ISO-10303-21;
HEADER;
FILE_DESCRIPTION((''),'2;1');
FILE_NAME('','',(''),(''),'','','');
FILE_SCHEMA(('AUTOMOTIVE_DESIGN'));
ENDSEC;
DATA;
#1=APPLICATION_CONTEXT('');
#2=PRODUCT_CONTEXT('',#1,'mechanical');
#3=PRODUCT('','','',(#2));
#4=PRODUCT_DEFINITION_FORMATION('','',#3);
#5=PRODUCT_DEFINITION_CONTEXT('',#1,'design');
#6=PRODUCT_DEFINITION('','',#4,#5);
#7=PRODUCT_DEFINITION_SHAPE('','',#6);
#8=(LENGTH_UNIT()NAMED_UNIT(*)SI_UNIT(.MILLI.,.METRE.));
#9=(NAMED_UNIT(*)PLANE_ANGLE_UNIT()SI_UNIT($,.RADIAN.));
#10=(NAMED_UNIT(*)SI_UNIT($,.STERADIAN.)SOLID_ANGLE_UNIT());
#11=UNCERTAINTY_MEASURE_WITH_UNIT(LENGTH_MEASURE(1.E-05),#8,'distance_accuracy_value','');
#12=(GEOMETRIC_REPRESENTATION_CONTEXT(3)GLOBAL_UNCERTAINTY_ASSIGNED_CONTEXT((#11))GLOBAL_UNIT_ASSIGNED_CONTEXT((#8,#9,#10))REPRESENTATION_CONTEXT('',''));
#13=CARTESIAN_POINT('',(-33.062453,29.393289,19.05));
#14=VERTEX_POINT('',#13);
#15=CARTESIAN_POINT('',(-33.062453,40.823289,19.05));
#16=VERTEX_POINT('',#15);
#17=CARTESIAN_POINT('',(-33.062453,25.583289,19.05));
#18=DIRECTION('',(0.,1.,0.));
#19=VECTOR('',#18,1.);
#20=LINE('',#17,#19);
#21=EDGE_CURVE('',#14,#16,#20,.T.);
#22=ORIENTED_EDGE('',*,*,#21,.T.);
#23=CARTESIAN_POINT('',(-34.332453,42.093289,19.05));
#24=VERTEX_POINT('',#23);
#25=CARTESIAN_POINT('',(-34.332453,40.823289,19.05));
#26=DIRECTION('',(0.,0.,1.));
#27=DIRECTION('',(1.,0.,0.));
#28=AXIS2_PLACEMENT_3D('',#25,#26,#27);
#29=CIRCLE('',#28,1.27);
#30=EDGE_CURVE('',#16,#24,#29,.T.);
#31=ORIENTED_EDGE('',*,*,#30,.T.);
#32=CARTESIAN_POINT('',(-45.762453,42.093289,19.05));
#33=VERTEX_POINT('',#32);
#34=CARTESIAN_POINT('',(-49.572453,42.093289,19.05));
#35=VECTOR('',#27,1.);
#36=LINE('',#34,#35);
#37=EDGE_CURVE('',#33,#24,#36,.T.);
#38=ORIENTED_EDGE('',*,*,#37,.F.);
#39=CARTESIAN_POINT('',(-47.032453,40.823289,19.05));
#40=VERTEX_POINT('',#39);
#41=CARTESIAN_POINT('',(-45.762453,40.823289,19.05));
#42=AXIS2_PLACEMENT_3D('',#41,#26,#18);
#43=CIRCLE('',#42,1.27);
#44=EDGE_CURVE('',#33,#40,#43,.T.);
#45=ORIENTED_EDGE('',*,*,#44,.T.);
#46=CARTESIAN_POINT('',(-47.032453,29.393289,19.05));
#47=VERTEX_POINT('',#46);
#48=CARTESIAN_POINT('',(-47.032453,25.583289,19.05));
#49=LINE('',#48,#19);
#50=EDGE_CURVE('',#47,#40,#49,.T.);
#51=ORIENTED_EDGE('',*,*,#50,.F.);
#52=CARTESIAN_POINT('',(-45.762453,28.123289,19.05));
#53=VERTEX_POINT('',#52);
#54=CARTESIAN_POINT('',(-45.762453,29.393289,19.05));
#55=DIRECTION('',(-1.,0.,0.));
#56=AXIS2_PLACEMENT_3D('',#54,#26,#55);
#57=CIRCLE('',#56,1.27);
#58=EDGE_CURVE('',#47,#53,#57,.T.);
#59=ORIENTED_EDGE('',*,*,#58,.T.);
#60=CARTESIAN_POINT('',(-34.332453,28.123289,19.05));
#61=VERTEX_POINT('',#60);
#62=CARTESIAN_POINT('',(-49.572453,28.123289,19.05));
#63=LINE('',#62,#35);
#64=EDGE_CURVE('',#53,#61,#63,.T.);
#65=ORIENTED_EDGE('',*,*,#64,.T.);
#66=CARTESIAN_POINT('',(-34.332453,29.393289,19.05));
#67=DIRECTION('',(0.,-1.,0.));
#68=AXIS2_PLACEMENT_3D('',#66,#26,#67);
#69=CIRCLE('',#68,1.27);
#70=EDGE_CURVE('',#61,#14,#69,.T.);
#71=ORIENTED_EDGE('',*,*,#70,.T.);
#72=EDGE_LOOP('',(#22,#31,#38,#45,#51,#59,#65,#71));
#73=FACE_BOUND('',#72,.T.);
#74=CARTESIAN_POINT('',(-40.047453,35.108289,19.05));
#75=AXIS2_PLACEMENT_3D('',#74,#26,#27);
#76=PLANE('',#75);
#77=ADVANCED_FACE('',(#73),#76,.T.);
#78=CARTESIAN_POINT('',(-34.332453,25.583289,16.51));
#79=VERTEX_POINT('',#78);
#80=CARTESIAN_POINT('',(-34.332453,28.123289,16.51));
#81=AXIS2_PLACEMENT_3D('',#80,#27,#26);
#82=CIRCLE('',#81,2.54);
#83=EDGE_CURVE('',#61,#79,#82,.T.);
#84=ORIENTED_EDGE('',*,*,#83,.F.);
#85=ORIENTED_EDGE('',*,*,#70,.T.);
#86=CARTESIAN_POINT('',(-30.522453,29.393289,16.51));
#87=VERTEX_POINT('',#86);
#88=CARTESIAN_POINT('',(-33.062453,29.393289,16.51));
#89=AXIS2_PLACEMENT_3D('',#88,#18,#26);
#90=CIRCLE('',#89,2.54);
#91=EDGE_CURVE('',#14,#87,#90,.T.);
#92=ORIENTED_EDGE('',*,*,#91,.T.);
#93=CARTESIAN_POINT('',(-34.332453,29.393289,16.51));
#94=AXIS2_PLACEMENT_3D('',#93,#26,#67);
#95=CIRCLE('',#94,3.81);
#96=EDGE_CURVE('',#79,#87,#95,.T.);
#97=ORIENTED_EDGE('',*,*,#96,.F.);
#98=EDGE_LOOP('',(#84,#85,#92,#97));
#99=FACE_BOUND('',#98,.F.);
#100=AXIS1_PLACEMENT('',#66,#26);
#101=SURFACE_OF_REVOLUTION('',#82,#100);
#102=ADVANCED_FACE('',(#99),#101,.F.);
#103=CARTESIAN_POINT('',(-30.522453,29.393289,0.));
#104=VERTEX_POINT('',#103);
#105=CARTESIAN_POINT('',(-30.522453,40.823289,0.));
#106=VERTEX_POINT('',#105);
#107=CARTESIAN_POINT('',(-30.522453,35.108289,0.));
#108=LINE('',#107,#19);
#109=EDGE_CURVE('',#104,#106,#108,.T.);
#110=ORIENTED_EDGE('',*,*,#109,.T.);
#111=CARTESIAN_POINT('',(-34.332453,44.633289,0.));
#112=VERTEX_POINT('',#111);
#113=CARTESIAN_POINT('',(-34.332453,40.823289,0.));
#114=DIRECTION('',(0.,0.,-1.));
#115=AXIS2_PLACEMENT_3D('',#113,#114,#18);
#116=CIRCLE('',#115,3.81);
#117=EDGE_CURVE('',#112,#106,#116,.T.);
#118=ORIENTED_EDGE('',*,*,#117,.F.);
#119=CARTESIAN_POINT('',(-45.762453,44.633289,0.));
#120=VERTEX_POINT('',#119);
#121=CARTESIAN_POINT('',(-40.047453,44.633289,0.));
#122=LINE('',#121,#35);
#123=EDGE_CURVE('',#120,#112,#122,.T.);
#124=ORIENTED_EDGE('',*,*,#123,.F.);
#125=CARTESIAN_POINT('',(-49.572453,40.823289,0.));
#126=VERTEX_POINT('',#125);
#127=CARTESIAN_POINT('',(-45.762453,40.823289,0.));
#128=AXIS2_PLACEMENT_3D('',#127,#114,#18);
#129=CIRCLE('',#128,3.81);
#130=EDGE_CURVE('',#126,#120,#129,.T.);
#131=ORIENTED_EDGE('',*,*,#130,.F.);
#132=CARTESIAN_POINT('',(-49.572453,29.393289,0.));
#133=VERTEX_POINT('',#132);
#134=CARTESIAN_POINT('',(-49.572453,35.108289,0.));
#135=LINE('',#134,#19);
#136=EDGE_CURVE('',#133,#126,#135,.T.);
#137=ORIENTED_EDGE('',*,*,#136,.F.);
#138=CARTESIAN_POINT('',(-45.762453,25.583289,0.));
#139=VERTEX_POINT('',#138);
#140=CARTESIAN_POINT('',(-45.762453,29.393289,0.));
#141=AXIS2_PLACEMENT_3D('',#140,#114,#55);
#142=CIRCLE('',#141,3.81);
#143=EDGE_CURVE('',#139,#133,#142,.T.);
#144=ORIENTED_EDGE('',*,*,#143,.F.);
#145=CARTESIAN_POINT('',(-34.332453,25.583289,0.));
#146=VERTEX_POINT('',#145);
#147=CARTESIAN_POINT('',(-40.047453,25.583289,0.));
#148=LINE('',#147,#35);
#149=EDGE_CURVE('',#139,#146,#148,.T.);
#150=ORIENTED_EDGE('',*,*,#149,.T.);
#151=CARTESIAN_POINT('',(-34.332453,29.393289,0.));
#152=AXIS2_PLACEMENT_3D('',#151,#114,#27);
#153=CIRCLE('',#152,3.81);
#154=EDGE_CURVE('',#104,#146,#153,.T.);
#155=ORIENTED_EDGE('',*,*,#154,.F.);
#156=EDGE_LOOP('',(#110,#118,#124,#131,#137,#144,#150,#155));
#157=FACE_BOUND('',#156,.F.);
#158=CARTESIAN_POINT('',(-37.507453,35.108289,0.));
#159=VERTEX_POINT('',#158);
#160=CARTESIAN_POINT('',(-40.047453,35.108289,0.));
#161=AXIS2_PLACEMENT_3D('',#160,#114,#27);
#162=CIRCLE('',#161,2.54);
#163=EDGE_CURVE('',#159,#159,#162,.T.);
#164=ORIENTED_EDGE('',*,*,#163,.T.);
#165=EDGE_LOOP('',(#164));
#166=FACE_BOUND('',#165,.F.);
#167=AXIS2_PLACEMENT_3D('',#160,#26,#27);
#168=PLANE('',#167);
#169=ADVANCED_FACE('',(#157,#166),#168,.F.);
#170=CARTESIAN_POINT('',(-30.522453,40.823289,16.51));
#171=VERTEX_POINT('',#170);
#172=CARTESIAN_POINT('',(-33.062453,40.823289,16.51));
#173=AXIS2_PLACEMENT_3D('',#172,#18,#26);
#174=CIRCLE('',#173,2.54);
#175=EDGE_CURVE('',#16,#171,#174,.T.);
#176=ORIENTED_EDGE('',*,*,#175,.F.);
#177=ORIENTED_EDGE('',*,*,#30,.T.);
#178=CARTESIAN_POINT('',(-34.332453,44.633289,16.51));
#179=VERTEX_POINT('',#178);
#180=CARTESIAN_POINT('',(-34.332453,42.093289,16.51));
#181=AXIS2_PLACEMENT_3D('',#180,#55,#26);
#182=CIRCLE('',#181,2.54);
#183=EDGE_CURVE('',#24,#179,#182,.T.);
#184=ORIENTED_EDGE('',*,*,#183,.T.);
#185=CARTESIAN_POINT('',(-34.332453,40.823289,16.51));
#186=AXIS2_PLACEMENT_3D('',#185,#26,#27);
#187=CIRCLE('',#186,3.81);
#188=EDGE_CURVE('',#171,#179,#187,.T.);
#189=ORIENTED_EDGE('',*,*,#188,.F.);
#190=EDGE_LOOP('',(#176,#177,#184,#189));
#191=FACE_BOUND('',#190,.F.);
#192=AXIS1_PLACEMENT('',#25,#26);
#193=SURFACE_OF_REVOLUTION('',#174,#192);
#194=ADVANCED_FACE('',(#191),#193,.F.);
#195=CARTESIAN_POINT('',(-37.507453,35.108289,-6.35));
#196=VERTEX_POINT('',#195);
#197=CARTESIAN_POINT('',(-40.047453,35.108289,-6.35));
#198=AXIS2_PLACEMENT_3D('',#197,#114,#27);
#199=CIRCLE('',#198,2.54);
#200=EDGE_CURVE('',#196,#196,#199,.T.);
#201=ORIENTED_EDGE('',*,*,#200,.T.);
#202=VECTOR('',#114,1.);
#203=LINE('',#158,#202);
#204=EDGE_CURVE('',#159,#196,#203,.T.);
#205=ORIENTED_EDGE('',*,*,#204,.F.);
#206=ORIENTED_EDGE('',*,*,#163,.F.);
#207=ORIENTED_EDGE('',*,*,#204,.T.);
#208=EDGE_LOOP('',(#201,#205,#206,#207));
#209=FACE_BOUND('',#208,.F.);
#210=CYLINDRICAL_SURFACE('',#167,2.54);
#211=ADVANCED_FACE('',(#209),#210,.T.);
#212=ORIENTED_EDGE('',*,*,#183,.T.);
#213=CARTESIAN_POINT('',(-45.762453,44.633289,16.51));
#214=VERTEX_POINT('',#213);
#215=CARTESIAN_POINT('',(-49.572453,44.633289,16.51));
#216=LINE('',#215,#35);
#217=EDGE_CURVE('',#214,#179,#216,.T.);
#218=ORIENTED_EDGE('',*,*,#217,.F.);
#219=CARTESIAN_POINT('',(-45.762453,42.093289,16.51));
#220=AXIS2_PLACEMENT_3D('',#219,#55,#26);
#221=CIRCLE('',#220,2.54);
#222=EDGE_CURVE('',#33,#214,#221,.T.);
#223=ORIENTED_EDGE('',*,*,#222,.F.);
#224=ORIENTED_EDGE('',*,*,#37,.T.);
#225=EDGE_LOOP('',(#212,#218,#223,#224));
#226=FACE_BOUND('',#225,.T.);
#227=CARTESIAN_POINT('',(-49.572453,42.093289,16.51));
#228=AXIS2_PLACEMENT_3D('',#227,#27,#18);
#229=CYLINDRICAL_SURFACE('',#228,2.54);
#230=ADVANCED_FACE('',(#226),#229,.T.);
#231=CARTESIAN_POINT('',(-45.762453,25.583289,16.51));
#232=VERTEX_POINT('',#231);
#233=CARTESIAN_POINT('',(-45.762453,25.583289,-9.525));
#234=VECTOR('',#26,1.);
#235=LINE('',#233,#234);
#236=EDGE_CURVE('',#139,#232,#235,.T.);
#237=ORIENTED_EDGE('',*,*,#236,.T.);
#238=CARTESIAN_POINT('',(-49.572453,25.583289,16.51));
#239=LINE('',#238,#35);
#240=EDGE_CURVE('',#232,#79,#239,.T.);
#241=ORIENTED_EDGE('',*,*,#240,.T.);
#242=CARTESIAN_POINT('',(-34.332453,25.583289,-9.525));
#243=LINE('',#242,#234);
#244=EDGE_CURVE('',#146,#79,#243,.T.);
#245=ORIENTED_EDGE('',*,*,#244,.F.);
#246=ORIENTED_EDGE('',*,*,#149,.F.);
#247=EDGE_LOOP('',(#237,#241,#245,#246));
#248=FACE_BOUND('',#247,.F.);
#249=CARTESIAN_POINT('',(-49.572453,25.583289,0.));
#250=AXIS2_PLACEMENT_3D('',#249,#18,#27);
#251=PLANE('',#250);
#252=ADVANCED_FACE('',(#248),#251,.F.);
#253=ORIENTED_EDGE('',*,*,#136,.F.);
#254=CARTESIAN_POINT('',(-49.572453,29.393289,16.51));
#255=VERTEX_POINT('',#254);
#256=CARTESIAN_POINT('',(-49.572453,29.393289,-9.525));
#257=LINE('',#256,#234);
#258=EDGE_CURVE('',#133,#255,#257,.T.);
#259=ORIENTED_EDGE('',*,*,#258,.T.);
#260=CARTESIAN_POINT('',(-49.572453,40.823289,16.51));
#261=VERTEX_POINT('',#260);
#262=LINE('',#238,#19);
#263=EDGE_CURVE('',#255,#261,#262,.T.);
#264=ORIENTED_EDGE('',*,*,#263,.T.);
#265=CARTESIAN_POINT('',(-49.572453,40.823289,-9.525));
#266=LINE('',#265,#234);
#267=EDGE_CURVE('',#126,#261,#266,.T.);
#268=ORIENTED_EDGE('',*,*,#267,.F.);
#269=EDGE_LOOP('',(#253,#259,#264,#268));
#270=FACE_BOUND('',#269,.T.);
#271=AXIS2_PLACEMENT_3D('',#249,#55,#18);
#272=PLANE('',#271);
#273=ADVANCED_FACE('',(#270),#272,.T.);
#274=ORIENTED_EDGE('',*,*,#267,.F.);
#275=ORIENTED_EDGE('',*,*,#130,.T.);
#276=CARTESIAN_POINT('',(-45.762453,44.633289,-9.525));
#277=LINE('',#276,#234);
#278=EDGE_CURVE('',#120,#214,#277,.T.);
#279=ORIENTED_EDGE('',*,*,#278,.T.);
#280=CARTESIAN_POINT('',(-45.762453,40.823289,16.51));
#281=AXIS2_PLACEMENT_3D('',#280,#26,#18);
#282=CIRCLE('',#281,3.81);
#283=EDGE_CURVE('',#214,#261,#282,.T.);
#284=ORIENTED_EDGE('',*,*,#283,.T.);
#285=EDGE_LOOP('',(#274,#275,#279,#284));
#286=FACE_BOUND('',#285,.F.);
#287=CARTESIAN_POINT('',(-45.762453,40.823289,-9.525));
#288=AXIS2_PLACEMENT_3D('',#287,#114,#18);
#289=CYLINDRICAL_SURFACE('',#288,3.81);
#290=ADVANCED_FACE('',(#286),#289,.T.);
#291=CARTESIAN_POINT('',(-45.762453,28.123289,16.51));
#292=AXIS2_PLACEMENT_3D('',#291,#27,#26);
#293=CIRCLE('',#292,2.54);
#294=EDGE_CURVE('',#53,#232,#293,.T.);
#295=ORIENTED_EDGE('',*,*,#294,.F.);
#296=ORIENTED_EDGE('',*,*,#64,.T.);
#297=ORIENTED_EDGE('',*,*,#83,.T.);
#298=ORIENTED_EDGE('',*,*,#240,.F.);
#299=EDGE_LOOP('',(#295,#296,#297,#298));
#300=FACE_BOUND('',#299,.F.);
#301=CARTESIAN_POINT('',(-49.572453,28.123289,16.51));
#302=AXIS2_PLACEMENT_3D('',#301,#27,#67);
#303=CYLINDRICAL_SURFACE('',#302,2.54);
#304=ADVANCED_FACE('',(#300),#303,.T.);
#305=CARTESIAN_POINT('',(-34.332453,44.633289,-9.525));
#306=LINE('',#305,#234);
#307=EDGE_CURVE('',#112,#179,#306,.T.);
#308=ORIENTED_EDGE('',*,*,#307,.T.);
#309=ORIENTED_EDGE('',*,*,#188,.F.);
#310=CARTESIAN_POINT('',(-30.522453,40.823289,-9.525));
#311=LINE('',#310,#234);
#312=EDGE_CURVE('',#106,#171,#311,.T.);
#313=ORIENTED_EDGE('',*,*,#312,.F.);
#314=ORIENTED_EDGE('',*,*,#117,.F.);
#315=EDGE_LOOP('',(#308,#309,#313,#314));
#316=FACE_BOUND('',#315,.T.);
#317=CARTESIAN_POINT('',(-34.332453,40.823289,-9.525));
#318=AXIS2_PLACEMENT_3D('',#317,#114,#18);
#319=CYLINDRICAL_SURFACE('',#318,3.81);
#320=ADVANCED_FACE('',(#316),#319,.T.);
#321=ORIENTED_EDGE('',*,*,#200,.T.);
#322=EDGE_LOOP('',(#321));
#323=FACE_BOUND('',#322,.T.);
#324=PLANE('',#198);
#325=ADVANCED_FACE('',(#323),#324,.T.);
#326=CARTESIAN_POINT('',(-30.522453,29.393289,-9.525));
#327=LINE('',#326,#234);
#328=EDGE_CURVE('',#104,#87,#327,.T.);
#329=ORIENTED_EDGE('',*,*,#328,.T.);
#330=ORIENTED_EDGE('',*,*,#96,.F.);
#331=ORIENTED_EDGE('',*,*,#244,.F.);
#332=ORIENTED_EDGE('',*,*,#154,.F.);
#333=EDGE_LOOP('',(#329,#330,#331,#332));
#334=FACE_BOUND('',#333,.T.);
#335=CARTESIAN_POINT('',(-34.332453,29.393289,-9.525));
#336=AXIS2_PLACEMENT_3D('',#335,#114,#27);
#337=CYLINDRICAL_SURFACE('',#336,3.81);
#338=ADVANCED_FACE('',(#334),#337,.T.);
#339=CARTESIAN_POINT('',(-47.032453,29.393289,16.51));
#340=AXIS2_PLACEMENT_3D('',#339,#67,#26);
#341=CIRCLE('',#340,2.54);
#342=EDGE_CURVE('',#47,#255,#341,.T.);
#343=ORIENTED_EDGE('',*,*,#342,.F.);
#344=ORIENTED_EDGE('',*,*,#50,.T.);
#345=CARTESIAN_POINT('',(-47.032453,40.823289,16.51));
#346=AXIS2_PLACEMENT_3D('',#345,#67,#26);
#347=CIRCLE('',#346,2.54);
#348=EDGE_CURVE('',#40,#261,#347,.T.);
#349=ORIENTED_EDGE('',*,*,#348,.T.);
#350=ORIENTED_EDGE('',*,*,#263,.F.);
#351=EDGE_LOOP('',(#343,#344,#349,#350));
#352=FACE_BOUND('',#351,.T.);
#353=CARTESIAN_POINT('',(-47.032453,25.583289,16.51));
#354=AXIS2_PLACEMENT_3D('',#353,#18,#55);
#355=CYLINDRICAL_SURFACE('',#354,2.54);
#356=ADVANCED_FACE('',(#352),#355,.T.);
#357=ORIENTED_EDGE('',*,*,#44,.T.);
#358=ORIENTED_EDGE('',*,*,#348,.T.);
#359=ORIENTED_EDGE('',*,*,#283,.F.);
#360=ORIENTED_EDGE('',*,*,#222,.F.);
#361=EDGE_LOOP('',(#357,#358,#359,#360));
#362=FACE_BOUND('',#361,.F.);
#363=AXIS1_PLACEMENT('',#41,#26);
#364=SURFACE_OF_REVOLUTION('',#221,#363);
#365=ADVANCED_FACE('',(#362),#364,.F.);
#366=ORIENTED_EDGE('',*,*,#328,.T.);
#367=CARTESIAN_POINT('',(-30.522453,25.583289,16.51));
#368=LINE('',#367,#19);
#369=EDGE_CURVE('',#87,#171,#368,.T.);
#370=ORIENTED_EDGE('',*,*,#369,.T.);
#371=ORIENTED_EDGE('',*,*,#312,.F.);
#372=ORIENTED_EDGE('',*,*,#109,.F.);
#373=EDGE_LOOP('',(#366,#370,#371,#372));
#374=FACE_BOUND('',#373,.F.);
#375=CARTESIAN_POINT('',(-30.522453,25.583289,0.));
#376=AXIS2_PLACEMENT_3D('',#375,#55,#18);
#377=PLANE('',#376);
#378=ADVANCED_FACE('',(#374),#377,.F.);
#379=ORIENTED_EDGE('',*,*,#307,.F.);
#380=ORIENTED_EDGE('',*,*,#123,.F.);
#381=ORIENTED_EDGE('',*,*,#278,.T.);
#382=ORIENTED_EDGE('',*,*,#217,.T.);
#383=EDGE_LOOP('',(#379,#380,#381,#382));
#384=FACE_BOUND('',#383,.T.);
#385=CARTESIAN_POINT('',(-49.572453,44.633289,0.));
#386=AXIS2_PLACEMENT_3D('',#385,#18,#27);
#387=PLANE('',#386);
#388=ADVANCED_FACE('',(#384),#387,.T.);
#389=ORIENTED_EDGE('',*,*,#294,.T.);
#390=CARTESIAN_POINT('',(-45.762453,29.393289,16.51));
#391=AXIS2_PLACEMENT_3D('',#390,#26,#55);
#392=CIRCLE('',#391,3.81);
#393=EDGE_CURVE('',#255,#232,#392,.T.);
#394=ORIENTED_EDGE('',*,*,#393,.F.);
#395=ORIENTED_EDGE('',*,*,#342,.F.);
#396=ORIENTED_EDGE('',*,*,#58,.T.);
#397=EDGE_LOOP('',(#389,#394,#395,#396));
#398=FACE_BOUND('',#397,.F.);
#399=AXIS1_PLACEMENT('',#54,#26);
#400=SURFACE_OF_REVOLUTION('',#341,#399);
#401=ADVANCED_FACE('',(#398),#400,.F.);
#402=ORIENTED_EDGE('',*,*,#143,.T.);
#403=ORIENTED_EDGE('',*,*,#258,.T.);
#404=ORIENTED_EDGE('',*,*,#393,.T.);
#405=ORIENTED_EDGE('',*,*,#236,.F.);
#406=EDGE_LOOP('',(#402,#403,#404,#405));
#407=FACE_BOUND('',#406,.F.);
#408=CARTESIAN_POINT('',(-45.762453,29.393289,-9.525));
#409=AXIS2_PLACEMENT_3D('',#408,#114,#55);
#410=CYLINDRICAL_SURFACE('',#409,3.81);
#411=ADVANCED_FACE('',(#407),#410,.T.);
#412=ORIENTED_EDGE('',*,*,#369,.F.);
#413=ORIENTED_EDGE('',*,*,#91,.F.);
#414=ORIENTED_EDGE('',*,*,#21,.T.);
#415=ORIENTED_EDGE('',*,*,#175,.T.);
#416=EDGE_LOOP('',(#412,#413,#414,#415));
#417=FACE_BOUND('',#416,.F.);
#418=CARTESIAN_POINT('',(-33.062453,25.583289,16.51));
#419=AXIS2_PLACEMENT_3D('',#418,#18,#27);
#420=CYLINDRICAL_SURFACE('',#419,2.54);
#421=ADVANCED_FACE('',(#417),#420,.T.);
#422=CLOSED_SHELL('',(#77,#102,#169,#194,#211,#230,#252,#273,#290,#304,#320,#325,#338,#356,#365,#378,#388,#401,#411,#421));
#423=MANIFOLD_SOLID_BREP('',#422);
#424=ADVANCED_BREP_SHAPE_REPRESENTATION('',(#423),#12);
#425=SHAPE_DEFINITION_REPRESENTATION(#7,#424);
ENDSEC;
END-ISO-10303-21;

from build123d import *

# Parameters (mm, degrees)
F0_W         = 19.05
F0_H         = 19.05
F1_DEPTH     = 19.05
F2_R         = 2.54
F3_T1_DEPTH  = 28.575
F3_T4_ANGLE  = 90
F3_T6_ANGLE  = 90
F3_T8_ANGLE  = 90
F3_T10_ANGLE = 90
F4_R         = 2.54
F5_DEPTH     = 6.35


# Not quite as in the source:
# - a fillet or chamfer that OpenCascade refuses, or shapes differently, is made with other operations: its cross-section is extruded or revolved along the edge and cut away or added


with BuildPart() as f1:
    # F0 (on Top) → F1 (new body)
    with BuildSketch(Plane.XY):
        with Locations((-40.0474531332, 35.1082887501)):
            Rectangle(F0_W, F0_H)
    extrude(amount=F1_DEPTH)

    # F2
    f2_edges = [f1.edges().sort_by_distance(p)[0] for p in [
        (-40.047453, 44.633289, 19.05),
        (-49.572453, 35.108289, 19.05),
        (-40.047453, 25.583289, 19.05),
        (-30.522453, 35.108289, 19.05),
    ]]
    fillet(f2_edges, radius=F2_R)

    # F3: fillet of radius 3.81 on 4 edges, made by hand

    # F3_s2 → F3_t1 (cut)
    with BuildSketch(Plane.XY.offset(-9.525)):
        with BuildLine():
            ThreePointArc((-49.5724531332, 29.3932887501), (-48.4565299695, 26.6992119137), (-45.7624531332, 25.5832887501))
            Line((-45.7624531332, 25.5832887501), (-49.5724531332, 25.5832887501))
            Line((-49.5724531332, 25.5832887501), (-49.5724531332, 29.3932887501))
        make_face()
        with BuildLine():
            ThreePointArc((-45.7624531332, 44.6332887501), (-48.4565299695, 43.5173655864), (-49.5724531332, 40.8232887501))
            Line((-49.5724531332, 40.8232887501), (-49.5724531332, 44.6332887501))
            Line((-49.5724531332, 44.6332887501), (-45.7624531332, 44.6332887501))
        make_face()
        with BuildLine():
            ThreePointArc((-30.5224531332, 29.3932887501), (-31.6383762969, 26.6992119137), (-34.3324531332, 25.5832887501))
            Line((-34.3324531332, 25.5832887501), (-30.5224531332, 25.5832887501))
            Line((-30.5224531332, 25.5832887501), (-30.5224531332, 29.3932887501))
        make_face()
        with BuildLine():
            ThreePointArc((-34.3324531332, 44.6332887501), (-31.6383762969, 43.5173655864), (-30.5224531332, 40.8232887501))
            Line((-30.5224531332, 40.8232887501), (-30.5224531332, 44.6332887501))
            Line((-30.5224531332, 44.6332887501), (-34.3324531332, 44.6332887501))
        make_face()
    extrude(amount=F3_T1_DEPTH, mode=Mode.SUBTRACT)

    # F3_s3 → F3_t4 (revolve, cut)
    with BuildSketch(Plane.XZ.offset(-40.8232887501)):
        with BuildLine():
            ThreePointArc((-33.0624531332, 19.05), (-31.266401909, 18.3060512242), (-30.5224531332, 16.51))
            Line((-30.5224531332, 16.51), (-30.5224531332, 19.05))
            Line((-30.5224531332, 19.05), (-33.0624531332, 19.05))
        make_face()
    revolve(axis=Axis((-34.3324531332, 40.8232887501, 19.05), (0, 0, 1)), revolution_arc=F3_T4_ANGLE, mode=Mode.SUBTRACT)

    # F3_s5 → F3_t6 (revolve, cut)
    with BuildSketch(Plane.YZ.offset(-34.3324531332)):
        with BuildLine():
            ThreePointArc((28.1232887501, 19.05), (26.3272375258, 18.3060512242), (25.5832887501, 16.51))
            Line((25.5832887501, 16.51), (25.5832887501, 19.05))
            Line((25.5832887501, 19.05), (28.1232887501, 19.05))
        make_face()
    revolve(axis=Axis((-34.3324531332, 29.3932887501, 19.05), (0, 0, 1)), revolution_arc=F3_T6_ANGLE, mode=Mode.SUBTRACT)

    # F3_s7 → F3_t8 (revolve, cut)
    with BuildSketch(Plane.YZ.offset(-45.7624531332)):
        with BuildLine():
            ThreePointArc((42.0932887501, 19.05), (43.8893399743, 18.3060512242), (44.6332887501, 16.51))
            Line((44.6332887501, 16.51), (44.6332887501, 19.05))
            Line((44.6332887501, 19.05), (42.0932887501, 19.05))
        make_face()
    revolve(axis=Axis((-45.7624531332, 40.8232887501, 19.05), (0, 0, 1)), revolution_arc=F3_T8_ANGLE, mode=Mode.SUBTRACT)

    # F3_s9 → F3_t10 (revolve, cut)
    with BuildSketch(Plane.XZ.offset(-29.3932887501)):
        with BuildLine():
            ThreePointArc((-47.0324531332, 19.05), (-48.8285043574, 18.3060512242), (-49.5724531332, 16.51))
            Line((-49.5724531332, 16.51), (-49.5724531332, 19.05))
            Line((-49.5724531332, 19.05), (-47.0324531332, 19.05))
        make_face()
    revolve(axis=Axis((-45.7624531332, 29.3932887501, 19.05), (0, 0, 1)), revolution_arc=F3_T10_ANGLE, mode=Mode.SUBTRACT)

    # F4 (on face) → F5 (join)
    with BuildSketch(Plane(origin=(0, 0, 0), x_dir=(1, 0, 0), z_dir=(0, 0, -1))):
        with Locations((-40.0474531332, -35.1082887501)):
            Circle(F4_R)
    extrude(amount=F5_DEPTH)


solid = f1.part
